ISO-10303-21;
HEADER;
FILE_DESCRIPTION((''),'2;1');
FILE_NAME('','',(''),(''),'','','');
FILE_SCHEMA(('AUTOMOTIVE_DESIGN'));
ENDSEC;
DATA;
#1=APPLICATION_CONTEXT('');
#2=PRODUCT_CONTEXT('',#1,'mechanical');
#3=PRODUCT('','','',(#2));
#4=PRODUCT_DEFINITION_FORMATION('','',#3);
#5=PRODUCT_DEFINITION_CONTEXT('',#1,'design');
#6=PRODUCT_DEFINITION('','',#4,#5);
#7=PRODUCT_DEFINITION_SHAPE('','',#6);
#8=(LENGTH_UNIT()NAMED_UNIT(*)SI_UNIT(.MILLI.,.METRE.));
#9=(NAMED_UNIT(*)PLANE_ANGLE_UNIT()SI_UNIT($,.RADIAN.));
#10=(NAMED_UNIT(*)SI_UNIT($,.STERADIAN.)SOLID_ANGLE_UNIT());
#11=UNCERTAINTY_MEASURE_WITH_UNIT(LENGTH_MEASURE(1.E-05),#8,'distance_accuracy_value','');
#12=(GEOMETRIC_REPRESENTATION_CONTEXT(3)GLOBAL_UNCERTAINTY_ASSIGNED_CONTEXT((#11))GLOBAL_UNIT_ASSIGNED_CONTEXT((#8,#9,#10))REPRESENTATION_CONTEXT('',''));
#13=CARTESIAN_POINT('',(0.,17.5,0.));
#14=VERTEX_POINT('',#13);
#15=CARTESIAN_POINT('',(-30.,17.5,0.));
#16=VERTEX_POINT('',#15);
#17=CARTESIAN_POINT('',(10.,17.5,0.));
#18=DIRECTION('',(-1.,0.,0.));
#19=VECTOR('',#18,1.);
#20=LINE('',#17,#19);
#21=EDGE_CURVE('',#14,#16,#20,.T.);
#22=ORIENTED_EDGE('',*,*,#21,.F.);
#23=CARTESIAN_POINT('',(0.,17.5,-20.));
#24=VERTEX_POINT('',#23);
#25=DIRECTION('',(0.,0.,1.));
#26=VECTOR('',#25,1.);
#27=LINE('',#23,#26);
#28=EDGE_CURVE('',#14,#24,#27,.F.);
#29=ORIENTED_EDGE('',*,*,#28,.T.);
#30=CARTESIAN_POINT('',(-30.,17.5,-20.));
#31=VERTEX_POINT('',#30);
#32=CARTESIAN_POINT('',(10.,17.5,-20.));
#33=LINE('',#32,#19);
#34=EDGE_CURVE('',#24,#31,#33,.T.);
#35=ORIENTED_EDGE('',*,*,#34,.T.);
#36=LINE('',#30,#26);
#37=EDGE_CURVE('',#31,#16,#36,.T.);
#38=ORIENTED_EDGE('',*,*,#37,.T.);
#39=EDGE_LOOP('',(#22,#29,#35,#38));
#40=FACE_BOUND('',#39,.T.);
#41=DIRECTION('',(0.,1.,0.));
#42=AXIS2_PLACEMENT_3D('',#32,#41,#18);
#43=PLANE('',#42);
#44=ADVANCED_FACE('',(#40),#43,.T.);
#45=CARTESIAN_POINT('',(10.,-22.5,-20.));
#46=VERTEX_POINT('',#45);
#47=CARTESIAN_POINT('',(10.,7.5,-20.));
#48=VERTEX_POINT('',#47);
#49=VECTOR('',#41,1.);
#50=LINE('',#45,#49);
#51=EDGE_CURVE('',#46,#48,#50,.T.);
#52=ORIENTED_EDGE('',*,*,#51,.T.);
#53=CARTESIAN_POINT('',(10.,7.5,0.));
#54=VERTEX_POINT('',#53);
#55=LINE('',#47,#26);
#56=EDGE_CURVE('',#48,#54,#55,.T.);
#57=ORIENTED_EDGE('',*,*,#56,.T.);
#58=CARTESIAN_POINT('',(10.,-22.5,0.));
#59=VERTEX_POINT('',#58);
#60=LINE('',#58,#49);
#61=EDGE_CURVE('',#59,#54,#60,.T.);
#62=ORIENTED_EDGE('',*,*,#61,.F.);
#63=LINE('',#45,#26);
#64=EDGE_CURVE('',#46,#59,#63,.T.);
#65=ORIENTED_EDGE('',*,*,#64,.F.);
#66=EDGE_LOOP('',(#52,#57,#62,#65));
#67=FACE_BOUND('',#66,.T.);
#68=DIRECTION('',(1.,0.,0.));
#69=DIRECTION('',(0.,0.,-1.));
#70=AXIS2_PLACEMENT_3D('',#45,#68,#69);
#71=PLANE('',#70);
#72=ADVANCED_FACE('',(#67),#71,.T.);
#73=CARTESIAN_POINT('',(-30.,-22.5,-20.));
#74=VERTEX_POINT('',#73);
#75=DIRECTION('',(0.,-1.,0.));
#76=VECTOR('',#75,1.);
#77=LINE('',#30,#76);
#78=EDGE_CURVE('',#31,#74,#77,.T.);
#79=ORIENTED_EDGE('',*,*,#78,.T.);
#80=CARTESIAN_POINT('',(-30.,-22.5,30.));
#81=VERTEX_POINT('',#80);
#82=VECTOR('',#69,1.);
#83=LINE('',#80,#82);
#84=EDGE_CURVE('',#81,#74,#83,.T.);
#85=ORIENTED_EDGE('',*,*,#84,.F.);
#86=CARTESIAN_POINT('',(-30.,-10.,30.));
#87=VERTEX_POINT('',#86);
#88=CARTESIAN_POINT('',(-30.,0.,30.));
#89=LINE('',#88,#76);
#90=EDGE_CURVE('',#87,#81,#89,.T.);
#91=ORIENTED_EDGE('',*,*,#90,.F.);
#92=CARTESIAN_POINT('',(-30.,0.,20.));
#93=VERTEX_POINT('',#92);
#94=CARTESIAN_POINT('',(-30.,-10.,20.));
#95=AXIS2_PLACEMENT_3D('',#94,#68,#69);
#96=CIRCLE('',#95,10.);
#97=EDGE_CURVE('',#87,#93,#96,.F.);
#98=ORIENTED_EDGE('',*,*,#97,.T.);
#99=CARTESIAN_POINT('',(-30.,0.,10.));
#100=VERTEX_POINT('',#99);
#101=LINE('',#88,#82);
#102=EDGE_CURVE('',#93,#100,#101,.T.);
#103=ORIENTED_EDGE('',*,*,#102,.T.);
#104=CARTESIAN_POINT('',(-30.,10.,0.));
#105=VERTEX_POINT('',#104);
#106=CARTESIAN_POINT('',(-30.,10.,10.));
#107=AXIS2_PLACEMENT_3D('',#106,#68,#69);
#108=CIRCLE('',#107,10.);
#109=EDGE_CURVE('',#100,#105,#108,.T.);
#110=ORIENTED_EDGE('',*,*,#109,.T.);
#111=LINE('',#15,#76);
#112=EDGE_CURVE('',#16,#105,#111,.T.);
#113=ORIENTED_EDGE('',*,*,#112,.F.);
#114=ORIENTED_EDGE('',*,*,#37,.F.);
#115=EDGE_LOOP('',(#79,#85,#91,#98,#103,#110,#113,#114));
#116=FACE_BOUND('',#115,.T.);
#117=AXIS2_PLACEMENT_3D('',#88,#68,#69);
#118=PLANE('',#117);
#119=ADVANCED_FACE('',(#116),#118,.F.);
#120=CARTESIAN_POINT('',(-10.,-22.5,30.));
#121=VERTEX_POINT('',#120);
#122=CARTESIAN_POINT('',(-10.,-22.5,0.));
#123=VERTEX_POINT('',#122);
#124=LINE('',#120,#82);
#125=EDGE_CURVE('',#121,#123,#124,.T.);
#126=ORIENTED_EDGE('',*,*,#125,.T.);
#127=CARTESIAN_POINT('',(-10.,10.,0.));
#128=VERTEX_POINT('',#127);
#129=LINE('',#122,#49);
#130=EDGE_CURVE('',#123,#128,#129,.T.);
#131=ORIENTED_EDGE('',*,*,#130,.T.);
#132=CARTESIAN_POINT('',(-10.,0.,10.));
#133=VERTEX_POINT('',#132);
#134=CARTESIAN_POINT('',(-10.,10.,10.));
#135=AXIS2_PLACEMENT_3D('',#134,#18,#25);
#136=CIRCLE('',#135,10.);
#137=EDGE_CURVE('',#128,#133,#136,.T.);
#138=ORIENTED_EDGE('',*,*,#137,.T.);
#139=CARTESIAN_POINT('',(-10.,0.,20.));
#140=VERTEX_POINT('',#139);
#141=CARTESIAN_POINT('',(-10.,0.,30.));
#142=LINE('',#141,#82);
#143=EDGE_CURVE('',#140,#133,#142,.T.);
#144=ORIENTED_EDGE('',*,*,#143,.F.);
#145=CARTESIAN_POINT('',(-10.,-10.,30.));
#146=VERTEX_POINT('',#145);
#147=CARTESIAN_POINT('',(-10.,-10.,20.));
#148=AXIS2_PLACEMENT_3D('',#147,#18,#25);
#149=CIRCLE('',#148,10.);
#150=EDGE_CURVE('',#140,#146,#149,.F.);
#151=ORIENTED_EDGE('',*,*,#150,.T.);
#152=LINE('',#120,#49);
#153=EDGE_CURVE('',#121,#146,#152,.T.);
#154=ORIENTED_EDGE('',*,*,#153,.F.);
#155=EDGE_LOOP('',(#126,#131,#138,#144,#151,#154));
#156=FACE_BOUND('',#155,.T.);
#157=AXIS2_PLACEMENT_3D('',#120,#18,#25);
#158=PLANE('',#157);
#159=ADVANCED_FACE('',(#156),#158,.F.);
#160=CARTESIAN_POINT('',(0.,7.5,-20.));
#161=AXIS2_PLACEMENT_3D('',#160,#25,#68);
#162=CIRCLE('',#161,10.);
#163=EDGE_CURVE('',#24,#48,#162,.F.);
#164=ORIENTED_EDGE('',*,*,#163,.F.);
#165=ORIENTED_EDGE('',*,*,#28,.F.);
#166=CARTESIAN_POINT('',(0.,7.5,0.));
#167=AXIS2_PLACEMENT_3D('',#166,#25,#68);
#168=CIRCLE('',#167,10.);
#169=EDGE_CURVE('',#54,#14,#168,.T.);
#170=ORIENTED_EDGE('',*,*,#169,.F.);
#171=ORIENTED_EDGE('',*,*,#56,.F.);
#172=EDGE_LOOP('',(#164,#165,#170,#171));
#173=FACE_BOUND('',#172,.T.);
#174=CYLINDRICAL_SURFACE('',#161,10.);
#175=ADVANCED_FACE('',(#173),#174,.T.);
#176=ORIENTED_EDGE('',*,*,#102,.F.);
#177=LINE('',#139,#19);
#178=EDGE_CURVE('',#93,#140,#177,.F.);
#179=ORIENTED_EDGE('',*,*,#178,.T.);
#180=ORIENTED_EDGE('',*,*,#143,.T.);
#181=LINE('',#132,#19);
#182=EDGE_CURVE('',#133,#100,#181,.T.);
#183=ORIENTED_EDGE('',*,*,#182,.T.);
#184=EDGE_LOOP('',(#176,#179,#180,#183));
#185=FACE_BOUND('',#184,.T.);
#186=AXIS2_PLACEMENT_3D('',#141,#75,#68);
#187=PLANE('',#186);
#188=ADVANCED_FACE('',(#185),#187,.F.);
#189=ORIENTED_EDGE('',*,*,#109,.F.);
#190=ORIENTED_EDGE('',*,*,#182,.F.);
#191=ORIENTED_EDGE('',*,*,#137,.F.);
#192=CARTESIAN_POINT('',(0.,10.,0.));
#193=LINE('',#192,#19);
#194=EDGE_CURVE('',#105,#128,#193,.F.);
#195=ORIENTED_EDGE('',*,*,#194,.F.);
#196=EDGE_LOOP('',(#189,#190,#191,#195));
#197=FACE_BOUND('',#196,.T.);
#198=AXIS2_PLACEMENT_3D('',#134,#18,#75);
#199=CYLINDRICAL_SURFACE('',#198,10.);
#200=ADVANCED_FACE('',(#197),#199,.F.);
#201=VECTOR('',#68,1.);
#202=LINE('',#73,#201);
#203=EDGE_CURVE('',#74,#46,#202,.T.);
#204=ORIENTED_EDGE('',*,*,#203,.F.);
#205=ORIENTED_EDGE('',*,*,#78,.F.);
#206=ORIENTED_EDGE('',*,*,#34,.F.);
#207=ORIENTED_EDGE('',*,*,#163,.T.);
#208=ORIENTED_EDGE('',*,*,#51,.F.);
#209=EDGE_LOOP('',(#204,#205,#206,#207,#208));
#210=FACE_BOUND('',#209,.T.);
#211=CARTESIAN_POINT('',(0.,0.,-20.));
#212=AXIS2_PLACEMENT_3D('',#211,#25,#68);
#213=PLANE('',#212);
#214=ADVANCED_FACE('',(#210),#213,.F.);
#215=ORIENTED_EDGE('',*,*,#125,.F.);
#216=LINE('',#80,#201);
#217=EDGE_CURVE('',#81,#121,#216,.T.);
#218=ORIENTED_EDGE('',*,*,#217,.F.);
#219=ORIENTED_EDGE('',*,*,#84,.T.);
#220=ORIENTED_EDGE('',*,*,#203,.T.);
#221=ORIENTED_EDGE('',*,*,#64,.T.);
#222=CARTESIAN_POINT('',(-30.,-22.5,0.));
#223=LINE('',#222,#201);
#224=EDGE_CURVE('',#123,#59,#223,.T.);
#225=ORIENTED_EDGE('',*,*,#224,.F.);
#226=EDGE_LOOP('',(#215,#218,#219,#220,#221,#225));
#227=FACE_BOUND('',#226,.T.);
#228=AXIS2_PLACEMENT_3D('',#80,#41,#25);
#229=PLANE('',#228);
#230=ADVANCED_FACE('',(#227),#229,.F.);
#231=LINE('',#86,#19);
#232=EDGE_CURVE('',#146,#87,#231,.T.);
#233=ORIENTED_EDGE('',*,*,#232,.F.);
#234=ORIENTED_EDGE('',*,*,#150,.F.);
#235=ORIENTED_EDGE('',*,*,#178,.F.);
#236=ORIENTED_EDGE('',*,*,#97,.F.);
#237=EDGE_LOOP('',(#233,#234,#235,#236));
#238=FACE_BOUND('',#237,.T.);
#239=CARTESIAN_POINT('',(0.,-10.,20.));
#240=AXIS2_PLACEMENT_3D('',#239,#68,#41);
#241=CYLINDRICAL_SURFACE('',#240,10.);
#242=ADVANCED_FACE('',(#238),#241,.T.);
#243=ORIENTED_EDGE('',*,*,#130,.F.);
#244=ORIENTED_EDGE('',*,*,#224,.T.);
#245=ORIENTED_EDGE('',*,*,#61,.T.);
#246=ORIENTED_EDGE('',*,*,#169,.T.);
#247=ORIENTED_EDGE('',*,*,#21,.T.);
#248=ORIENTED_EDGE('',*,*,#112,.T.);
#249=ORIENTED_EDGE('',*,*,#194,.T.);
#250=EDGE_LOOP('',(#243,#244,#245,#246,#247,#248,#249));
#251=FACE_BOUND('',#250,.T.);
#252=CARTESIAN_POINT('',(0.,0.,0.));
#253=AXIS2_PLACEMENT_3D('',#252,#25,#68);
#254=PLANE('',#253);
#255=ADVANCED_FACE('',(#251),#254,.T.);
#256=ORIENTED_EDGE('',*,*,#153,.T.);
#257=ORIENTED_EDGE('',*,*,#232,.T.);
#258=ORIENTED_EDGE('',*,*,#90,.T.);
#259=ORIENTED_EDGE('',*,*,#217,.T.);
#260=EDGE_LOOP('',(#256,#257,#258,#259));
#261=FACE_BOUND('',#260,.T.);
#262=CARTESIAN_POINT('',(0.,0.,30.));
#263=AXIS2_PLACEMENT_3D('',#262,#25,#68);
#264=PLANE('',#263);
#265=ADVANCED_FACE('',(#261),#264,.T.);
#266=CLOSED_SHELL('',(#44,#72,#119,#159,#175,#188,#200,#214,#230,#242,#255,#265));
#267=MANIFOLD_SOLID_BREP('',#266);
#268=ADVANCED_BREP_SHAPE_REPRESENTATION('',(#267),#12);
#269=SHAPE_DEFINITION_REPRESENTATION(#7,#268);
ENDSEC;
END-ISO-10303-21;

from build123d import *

# Parameters (mm, degrees)
SKETCH1_W           = 20
SKETCH1_H           = 22.5
BOSS_EXTRUDE1_DEPTH = 30
SKETCH2_W           = 40
SKETCH2_H           = 40
BOSS_EXTRUDE2_DEPTH = 20
FILLET1_R           = 10


with BuildPart() as part:
    # Sketch1 → Boss-Extrude1 (new body)
    with BuildSketch(Plane.XY):
        with Locations((-20, -11.25)):
            Rectangle(SKETCH1_W, SKETCH1_H)
    extrude(amount=BOSS_EXTRUDE1_DEPTH)

    # Sketch2 → Boss-Extrude2 (add)
    with BuildSketch(Plane.XY):
        with Locations((-10, -2.5)):
            Rectangle(SKETCH2_W, SKETCH2_H)
    extrude(amount=-BOSS_EXTRUDE2_DEPTH)

    # Fillet1
    fillet1_edges = [part.edges().sort_by_distance(p)[0] for p in [
        (-20, 0, 0),
        (10, 17.5, -10),
        (-20, 0, 30),
    ]]
    fillet(fillet1_edges, radius=FILLET1_R)


solid = part.part
